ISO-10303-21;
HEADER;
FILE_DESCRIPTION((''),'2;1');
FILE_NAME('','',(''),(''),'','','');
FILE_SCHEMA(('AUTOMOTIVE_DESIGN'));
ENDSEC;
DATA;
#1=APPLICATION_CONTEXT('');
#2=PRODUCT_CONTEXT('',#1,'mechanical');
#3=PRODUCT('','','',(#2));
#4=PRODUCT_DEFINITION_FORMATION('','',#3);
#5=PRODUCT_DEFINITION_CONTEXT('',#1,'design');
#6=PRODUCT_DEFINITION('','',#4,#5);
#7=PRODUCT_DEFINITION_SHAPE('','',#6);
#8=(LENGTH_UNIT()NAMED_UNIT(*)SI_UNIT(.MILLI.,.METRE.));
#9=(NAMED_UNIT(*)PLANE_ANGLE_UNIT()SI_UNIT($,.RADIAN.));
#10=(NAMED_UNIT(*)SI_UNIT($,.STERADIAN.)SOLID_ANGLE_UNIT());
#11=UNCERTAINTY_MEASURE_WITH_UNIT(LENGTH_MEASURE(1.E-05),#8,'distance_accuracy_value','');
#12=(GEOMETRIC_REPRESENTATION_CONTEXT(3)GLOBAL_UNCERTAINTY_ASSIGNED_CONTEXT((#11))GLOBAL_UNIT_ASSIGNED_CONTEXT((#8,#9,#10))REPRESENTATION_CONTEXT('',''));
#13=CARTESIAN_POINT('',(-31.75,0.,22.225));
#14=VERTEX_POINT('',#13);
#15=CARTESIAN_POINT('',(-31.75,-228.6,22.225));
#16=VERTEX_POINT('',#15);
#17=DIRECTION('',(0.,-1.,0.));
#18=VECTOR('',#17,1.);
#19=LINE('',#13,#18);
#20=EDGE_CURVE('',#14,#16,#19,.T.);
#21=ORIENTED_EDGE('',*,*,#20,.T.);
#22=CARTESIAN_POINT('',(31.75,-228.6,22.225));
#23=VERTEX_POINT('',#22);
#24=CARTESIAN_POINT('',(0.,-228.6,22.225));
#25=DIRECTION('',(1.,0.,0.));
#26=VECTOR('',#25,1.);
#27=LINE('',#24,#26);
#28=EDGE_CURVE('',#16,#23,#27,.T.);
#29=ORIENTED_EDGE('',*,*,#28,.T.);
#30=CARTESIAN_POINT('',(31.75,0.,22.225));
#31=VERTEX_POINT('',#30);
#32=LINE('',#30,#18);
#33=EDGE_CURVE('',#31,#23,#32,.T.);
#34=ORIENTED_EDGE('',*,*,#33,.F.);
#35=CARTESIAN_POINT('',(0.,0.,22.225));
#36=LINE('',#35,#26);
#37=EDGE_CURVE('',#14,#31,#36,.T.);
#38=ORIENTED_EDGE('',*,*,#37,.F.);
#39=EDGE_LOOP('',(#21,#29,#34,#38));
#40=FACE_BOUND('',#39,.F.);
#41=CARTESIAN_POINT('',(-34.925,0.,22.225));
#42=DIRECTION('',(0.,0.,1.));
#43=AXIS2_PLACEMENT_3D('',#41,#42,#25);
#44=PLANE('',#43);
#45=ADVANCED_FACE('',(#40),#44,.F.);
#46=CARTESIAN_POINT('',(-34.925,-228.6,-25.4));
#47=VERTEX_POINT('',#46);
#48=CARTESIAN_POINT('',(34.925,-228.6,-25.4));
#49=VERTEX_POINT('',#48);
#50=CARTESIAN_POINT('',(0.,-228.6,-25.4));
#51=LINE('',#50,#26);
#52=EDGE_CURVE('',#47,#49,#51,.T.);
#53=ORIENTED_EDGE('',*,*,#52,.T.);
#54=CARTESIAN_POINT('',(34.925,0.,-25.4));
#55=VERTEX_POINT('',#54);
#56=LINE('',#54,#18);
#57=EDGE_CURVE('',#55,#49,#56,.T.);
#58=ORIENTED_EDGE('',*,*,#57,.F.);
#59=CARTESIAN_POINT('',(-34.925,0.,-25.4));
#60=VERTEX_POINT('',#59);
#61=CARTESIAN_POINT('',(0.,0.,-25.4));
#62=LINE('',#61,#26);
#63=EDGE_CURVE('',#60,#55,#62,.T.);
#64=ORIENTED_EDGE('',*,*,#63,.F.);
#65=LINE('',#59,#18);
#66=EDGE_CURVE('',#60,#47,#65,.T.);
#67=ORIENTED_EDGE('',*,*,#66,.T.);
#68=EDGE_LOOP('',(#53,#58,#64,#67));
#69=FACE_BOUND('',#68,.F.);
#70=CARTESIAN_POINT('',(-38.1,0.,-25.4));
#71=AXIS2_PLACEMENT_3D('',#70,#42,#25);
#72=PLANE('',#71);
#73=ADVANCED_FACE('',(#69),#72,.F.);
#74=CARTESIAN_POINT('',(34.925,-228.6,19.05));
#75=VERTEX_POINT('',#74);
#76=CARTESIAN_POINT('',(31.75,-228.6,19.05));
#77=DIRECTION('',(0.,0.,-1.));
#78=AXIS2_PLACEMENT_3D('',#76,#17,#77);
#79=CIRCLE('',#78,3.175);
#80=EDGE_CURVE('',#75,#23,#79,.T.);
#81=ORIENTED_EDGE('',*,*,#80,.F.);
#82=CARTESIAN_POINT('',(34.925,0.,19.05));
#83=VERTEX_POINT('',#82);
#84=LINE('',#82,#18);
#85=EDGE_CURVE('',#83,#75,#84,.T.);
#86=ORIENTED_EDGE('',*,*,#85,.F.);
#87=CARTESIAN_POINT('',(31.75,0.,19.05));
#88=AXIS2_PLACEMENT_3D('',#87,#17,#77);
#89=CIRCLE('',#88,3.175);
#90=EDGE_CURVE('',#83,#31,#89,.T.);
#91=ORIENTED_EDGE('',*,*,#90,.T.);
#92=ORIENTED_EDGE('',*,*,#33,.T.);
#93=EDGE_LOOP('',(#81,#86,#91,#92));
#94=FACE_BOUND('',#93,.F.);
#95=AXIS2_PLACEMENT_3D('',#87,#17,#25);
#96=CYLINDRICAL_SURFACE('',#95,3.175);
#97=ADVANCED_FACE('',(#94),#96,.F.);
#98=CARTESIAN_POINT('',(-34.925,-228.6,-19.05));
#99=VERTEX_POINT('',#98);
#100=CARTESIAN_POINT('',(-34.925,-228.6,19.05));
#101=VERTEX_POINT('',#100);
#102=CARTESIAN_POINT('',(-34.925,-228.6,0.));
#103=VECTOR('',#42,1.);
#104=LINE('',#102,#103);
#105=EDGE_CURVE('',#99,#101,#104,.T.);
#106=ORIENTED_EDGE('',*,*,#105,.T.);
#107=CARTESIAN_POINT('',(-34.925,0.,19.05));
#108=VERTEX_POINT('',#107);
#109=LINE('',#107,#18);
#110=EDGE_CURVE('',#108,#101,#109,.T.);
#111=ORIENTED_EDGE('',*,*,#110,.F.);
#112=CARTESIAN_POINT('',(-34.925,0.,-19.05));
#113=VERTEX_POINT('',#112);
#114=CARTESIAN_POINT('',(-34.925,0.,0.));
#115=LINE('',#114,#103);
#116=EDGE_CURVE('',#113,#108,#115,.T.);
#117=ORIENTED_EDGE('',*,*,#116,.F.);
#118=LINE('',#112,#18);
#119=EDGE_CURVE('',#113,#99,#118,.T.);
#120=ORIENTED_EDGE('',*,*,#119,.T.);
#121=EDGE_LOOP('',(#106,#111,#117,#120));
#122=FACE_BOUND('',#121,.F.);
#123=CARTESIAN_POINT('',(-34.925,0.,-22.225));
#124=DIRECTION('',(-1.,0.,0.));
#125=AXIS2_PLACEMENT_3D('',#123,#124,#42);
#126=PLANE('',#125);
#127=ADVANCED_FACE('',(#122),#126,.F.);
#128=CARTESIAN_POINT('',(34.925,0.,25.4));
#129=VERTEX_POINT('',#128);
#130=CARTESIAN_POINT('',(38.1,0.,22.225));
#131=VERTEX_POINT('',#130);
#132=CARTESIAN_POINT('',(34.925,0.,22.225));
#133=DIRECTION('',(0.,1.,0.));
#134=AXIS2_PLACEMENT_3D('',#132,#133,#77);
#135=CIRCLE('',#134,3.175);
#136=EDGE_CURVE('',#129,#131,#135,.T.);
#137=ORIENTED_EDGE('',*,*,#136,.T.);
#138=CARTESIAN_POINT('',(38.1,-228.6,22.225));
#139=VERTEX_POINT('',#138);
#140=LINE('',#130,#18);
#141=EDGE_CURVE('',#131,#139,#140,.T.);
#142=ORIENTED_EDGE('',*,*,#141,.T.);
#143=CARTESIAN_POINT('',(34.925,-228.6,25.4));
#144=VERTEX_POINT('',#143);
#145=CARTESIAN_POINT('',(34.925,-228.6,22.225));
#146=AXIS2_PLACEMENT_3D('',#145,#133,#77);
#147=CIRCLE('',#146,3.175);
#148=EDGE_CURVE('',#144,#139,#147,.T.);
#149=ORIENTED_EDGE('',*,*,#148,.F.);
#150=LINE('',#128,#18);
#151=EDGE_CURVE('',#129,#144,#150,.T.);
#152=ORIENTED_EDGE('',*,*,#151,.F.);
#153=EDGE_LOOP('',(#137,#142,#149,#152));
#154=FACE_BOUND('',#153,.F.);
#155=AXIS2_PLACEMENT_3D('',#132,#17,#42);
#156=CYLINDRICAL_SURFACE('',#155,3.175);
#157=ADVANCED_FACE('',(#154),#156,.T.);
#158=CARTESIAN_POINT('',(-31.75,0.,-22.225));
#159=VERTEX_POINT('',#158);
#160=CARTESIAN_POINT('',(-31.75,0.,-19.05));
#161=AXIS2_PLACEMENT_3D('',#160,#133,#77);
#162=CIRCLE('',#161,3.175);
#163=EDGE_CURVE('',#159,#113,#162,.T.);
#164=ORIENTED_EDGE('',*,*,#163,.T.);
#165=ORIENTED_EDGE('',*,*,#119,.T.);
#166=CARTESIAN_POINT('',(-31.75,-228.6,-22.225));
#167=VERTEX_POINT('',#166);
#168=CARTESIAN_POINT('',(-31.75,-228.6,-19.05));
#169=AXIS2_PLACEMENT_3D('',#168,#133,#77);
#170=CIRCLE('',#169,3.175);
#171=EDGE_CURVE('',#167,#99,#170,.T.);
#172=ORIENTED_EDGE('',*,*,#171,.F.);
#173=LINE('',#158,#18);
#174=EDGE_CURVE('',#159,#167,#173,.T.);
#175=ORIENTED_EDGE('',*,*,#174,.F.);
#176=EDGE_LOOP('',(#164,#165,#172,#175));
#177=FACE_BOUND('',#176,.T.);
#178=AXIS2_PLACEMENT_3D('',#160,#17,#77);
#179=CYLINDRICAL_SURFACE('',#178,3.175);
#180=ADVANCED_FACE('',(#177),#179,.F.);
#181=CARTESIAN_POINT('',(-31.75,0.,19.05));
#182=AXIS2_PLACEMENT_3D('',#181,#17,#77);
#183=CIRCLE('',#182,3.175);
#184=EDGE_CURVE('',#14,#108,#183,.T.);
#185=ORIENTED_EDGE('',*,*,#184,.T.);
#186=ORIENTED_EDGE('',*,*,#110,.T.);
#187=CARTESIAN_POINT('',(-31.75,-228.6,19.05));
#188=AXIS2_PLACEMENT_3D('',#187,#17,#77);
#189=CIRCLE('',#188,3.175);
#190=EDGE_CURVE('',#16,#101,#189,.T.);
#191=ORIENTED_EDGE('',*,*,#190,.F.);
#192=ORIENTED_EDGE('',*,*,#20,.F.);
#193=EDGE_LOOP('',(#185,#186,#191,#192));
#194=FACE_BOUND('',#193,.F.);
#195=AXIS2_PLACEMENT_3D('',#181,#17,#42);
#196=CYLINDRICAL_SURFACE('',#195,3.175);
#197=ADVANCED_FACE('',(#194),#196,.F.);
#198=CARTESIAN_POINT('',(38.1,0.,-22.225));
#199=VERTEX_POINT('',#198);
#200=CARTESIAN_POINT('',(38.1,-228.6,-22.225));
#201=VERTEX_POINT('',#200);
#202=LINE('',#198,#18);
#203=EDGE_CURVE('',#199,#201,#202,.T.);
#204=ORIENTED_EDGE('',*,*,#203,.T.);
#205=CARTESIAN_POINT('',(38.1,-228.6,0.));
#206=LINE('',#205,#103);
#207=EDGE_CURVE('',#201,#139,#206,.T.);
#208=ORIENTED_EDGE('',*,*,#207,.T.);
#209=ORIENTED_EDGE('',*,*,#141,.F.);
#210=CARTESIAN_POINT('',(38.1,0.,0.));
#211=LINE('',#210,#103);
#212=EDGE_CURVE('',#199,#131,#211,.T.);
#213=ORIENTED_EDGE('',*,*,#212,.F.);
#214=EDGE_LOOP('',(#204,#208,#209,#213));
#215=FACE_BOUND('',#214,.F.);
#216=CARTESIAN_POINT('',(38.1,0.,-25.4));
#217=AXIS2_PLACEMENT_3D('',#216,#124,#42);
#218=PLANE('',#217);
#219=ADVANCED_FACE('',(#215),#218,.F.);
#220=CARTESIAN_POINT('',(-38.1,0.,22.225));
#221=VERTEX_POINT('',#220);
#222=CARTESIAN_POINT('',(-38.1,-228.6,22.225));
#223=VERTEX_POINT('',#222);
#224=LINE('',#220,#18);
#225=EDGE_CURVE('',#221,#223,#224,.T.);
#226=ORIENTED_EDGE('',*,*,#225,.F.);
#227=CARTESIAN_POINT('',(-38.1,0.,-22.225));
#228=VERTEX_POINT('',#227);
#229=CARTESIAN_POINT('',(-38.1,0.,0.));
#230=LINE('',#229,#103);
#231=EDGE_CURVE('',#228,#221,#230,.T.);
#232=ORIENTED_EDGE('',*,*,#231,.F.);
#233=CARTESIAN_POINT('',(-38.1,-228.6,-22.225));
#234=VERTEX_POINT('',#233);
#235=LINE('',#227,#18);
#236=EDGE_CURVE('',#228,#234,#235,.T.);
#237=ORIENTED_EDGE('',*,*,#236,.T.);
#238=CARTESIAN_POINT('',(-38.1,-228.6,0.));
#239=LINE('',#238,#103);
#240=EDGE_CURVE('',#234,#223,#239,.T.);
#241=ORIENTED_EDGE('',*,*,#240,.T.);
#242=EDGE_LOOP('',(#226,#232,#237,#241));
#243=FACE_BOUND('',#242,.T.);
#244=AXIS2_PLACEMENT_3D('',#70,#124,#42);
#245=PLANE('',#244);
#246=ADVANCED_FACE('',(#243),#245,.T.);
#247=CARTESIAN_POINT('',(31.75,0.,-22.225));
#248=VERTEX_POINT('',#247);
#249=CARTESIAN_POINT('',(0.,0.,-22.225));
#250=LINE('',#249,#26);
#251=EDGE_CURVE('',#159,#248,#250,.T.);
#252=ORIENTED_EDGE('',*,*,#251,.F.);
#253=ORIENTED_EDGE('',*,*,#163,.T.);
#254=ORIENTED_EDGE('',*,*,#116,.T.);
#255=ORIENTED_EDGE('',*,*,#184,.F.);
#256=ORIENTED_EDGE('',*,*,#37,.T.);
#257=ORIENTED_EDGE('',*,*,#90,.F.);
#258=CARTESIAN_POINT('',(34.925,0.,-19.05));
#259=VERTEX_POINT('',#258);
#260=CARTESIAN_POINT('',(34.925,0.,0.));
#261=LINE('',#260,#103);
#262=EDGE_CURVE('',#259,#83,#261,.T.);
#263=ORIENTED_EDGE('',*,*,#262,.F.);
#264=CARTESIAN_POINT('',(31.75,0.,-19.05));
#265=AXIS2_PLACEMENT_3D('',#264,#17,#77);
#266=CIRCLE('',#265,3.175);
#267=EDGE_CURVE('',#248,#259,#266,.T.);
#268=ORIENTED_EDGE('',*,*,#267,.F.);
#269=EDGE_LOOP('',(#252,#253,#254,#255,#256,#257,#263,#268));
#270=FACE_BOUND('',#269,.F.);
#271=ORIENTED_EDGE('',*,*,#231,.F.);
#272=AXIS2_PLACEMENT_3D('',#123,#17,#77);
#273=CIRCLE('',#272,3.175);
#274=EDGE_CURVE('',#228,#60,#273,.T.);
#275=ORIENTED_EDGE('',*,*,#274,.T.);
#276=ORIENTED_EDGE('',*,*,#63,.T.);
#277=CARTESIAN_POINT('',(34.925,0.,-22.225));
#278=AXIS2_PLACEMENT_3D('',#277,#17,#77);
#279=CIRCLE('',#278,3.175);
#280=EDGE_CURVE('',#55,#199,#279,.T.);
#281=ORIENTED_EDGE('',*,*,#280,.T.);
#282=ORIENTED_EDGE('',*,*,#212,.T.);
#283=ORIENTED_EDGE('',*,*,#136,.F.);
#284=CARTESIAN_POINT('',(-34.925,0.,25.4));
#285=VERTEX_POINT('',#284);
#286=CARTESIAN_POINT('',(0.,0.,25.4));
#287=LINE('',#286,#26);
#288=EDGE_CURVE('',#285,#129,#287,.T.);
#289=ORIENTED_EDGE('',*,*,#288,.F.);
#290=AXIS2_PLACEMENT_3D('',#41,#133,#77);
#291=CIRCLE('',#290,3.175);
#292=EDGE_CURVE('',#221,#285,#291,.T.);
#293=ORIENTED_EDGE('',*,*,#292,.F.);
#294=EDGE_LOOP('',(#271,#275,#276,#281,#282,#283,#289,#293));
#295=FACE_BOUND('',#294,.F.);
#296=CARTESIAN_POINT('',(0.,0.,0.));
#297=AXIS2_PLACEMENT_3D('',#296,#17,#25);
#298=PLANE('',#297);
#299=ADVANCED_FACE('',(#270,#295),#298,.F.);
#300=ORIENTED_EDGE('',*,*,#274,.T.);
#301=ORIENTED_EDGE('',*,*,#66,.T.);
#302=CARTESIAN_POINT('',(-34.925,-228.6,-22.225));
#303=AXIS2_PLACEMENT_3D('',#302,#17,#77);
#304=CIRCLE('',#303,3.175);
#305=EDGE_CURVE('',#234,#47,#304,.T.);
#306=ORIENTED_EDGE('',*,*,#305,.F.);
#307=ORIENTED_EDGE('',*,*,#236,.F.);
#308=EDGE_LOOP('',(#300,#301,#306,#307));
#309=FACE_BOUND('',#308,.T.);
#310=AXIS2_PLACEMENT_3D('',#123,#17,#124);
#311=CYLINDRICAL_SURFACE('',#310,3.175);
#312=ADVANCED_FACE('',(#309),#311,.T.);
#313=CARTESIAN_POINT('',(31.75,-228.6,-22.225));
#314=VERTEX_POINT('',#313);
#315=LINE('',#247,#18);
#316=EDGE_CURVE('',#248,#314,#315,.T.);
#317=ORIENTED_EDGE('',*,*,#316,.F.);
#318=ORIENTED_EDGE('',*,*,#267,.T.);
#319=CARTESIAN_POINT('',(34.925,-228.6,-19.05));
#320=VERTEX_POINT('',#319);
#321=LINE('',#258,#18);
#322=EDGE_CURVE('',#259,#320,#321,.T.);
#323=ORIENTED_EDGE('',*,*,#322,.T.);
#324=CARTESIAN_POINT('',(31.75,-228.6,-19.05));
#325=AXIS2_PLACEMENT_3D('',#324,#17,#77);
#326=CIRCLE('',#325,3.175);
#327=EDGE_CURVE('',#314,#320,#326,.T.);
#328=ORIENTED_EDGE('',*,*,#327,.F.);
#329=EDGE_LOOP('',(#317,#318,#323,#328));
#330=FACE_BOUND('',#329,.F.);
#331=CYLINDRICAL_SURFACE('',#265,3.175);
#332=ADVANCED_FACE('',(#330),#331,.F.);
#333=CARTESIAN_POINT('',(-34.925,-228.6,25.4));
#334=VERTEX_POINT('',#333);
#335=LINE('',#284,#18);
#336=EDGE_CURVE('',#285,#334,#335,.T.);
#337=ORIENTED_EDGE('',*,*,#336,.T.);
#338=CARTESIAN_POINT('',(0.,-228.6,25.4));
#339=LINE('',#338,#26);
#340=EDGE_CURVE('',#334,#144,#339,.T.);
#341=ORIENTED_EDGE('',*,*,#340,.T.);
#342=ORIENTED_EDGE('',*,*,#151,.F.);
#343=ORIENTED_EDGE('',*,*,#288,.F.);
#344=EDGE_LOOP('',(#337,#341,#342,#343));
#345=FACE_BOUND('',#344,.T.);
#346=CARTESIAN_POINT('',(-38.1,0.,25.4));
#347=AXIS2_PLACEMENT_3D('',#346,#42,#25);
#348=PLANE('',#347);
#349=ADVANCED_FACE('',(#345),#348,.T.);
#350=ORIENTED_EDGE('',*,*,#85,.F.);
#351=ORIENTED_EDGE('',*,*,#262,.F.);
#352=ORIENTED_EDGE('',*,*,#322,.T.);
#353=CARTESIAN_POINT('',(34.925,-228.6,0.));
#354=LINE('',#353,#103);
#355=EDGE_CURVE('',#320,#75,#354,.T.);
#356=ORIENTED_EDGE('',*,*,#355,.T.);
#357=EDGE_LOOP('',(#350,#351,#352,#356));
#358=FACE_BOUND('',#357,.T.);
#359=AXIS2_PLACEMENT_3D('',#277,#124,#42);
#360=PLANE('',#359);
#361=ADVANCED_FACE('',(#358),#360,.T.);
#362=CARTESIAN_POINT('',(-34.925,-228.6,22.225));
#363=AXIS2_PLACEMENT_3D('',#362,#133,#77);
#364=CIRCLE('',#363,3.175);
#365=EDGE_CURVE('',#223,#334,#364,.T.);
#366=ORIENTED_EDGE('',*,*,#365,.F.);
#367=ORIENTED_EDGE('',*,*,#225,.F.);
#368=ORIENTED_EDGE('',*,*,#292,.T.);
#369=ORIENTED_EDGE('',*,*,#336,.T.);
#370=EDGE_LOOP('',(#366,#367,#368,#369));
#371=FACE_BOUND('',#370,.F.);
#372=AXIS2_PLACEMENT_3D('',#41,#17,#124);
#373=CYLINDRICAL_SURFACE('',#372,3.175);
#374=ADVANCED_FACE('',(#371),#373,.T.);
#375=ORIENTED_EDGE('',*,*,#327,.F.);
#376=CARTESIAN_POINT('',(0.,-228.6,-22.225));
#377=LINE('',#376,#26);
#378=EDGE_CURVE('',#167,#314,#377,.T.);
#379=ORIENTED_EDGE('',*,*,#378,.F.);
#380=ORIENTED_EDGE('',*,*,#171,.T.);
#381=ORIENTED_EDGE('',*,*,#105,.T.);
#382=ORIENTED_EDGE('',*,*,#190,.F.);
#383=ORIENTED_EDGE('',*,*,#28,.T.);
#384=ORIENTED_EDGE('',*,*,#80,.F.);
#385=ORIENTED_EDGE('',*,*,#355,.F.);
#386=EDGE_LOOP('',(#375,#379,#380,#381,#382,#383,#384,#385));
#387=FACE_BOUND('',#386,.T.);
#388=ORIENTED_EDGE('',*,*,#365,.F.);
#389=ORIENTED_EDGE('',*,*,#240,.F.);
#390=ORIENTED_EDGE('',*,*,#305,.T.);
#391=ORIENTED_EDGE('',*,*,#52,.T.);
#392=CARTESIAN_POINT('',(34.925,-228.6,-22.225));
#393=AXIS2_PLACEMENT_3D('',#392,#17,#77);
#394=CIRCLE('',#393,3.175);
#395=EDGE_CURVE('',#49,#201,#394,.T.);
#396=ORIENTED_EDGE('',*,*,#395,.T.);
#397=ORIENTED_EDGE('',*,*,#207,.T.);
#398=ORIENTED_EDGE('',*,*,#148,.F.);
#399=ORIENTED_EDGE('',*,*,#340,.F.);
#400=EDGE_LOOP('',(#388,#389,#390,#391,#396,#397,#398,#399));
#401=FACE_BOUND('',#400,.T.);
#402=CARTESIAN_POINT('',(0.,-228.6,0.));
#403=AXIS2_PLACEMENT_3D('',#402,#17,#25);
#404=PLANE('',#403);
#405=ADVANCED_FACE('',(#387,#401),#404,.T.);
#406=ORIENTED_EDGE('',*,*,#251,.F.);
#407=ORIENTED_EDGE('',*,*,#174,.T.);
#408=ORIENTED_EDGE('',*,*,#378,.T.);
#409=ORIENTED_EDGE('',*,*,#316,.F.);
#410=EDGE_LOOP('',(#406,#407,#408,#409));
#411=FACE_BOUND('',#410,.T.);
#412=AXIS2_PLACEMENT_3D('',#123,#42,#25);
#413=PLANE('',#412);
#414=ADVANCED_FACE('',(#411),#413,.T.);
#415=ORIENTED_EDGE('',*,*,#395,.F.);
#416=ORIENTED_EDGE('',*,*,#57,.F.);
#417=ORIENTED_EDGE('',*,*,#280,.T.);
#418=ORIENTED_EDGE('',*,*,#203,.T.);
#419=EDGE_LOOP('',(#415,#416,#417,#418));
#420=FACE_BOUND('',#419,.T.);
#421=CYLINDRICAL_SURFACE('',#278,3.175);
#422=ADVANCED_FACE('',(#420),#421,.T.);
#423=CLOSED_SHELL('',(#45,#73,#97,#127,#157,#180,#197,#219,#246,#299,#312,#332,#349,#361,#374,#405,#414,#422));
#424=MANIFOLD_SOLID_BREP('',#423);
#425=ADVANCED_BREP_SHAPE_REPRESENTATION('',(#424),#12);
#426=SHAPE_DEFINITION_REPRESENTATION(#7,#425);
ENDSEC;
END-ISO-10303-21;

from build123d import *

# Parameters (mm, degrees)
F0_W     = 76.2
F0_H     = 50.8
F0_W_2   = 69.85
F0_H_2   = 44.45
F2_DEPTH = 228.6
F3_R     = 3.175


# Not quite as in the source:
# - a variable given as a bare number and used for a length is read in inches; the dataset says mm whatever the document's units were


with BuildPart() as f2:
    # F0 (on Front) → F2 (new body)
    with BuildSketch(Plane.XZ):
        Rectangle(F0_W, F0_H)
        Rectangle(F0_W_2, F0_H_2, mode=Mode.SUBTRACT)
    extrude(amount=F2_DEPTH)

    # F3
    f3_edges = [f2.edges().sort_by_distance(p)[0] for p in [
        (-38.1, -114.3, 25.4),
        (38.1, -114.3, 25.4),
        (38.1, -114.3, -25.4),
        (-38.1, -114.3, -25.4),
        (-34.925, -114.3, -22.225),
        (-34.925, -114.3, 22.225),
        (34.925, -114.3, 22.225),
        (34.925, -114.3, -22.225),
    ]]
    fillet(f3_edges, radius=F3_R)


solid = f2.part
